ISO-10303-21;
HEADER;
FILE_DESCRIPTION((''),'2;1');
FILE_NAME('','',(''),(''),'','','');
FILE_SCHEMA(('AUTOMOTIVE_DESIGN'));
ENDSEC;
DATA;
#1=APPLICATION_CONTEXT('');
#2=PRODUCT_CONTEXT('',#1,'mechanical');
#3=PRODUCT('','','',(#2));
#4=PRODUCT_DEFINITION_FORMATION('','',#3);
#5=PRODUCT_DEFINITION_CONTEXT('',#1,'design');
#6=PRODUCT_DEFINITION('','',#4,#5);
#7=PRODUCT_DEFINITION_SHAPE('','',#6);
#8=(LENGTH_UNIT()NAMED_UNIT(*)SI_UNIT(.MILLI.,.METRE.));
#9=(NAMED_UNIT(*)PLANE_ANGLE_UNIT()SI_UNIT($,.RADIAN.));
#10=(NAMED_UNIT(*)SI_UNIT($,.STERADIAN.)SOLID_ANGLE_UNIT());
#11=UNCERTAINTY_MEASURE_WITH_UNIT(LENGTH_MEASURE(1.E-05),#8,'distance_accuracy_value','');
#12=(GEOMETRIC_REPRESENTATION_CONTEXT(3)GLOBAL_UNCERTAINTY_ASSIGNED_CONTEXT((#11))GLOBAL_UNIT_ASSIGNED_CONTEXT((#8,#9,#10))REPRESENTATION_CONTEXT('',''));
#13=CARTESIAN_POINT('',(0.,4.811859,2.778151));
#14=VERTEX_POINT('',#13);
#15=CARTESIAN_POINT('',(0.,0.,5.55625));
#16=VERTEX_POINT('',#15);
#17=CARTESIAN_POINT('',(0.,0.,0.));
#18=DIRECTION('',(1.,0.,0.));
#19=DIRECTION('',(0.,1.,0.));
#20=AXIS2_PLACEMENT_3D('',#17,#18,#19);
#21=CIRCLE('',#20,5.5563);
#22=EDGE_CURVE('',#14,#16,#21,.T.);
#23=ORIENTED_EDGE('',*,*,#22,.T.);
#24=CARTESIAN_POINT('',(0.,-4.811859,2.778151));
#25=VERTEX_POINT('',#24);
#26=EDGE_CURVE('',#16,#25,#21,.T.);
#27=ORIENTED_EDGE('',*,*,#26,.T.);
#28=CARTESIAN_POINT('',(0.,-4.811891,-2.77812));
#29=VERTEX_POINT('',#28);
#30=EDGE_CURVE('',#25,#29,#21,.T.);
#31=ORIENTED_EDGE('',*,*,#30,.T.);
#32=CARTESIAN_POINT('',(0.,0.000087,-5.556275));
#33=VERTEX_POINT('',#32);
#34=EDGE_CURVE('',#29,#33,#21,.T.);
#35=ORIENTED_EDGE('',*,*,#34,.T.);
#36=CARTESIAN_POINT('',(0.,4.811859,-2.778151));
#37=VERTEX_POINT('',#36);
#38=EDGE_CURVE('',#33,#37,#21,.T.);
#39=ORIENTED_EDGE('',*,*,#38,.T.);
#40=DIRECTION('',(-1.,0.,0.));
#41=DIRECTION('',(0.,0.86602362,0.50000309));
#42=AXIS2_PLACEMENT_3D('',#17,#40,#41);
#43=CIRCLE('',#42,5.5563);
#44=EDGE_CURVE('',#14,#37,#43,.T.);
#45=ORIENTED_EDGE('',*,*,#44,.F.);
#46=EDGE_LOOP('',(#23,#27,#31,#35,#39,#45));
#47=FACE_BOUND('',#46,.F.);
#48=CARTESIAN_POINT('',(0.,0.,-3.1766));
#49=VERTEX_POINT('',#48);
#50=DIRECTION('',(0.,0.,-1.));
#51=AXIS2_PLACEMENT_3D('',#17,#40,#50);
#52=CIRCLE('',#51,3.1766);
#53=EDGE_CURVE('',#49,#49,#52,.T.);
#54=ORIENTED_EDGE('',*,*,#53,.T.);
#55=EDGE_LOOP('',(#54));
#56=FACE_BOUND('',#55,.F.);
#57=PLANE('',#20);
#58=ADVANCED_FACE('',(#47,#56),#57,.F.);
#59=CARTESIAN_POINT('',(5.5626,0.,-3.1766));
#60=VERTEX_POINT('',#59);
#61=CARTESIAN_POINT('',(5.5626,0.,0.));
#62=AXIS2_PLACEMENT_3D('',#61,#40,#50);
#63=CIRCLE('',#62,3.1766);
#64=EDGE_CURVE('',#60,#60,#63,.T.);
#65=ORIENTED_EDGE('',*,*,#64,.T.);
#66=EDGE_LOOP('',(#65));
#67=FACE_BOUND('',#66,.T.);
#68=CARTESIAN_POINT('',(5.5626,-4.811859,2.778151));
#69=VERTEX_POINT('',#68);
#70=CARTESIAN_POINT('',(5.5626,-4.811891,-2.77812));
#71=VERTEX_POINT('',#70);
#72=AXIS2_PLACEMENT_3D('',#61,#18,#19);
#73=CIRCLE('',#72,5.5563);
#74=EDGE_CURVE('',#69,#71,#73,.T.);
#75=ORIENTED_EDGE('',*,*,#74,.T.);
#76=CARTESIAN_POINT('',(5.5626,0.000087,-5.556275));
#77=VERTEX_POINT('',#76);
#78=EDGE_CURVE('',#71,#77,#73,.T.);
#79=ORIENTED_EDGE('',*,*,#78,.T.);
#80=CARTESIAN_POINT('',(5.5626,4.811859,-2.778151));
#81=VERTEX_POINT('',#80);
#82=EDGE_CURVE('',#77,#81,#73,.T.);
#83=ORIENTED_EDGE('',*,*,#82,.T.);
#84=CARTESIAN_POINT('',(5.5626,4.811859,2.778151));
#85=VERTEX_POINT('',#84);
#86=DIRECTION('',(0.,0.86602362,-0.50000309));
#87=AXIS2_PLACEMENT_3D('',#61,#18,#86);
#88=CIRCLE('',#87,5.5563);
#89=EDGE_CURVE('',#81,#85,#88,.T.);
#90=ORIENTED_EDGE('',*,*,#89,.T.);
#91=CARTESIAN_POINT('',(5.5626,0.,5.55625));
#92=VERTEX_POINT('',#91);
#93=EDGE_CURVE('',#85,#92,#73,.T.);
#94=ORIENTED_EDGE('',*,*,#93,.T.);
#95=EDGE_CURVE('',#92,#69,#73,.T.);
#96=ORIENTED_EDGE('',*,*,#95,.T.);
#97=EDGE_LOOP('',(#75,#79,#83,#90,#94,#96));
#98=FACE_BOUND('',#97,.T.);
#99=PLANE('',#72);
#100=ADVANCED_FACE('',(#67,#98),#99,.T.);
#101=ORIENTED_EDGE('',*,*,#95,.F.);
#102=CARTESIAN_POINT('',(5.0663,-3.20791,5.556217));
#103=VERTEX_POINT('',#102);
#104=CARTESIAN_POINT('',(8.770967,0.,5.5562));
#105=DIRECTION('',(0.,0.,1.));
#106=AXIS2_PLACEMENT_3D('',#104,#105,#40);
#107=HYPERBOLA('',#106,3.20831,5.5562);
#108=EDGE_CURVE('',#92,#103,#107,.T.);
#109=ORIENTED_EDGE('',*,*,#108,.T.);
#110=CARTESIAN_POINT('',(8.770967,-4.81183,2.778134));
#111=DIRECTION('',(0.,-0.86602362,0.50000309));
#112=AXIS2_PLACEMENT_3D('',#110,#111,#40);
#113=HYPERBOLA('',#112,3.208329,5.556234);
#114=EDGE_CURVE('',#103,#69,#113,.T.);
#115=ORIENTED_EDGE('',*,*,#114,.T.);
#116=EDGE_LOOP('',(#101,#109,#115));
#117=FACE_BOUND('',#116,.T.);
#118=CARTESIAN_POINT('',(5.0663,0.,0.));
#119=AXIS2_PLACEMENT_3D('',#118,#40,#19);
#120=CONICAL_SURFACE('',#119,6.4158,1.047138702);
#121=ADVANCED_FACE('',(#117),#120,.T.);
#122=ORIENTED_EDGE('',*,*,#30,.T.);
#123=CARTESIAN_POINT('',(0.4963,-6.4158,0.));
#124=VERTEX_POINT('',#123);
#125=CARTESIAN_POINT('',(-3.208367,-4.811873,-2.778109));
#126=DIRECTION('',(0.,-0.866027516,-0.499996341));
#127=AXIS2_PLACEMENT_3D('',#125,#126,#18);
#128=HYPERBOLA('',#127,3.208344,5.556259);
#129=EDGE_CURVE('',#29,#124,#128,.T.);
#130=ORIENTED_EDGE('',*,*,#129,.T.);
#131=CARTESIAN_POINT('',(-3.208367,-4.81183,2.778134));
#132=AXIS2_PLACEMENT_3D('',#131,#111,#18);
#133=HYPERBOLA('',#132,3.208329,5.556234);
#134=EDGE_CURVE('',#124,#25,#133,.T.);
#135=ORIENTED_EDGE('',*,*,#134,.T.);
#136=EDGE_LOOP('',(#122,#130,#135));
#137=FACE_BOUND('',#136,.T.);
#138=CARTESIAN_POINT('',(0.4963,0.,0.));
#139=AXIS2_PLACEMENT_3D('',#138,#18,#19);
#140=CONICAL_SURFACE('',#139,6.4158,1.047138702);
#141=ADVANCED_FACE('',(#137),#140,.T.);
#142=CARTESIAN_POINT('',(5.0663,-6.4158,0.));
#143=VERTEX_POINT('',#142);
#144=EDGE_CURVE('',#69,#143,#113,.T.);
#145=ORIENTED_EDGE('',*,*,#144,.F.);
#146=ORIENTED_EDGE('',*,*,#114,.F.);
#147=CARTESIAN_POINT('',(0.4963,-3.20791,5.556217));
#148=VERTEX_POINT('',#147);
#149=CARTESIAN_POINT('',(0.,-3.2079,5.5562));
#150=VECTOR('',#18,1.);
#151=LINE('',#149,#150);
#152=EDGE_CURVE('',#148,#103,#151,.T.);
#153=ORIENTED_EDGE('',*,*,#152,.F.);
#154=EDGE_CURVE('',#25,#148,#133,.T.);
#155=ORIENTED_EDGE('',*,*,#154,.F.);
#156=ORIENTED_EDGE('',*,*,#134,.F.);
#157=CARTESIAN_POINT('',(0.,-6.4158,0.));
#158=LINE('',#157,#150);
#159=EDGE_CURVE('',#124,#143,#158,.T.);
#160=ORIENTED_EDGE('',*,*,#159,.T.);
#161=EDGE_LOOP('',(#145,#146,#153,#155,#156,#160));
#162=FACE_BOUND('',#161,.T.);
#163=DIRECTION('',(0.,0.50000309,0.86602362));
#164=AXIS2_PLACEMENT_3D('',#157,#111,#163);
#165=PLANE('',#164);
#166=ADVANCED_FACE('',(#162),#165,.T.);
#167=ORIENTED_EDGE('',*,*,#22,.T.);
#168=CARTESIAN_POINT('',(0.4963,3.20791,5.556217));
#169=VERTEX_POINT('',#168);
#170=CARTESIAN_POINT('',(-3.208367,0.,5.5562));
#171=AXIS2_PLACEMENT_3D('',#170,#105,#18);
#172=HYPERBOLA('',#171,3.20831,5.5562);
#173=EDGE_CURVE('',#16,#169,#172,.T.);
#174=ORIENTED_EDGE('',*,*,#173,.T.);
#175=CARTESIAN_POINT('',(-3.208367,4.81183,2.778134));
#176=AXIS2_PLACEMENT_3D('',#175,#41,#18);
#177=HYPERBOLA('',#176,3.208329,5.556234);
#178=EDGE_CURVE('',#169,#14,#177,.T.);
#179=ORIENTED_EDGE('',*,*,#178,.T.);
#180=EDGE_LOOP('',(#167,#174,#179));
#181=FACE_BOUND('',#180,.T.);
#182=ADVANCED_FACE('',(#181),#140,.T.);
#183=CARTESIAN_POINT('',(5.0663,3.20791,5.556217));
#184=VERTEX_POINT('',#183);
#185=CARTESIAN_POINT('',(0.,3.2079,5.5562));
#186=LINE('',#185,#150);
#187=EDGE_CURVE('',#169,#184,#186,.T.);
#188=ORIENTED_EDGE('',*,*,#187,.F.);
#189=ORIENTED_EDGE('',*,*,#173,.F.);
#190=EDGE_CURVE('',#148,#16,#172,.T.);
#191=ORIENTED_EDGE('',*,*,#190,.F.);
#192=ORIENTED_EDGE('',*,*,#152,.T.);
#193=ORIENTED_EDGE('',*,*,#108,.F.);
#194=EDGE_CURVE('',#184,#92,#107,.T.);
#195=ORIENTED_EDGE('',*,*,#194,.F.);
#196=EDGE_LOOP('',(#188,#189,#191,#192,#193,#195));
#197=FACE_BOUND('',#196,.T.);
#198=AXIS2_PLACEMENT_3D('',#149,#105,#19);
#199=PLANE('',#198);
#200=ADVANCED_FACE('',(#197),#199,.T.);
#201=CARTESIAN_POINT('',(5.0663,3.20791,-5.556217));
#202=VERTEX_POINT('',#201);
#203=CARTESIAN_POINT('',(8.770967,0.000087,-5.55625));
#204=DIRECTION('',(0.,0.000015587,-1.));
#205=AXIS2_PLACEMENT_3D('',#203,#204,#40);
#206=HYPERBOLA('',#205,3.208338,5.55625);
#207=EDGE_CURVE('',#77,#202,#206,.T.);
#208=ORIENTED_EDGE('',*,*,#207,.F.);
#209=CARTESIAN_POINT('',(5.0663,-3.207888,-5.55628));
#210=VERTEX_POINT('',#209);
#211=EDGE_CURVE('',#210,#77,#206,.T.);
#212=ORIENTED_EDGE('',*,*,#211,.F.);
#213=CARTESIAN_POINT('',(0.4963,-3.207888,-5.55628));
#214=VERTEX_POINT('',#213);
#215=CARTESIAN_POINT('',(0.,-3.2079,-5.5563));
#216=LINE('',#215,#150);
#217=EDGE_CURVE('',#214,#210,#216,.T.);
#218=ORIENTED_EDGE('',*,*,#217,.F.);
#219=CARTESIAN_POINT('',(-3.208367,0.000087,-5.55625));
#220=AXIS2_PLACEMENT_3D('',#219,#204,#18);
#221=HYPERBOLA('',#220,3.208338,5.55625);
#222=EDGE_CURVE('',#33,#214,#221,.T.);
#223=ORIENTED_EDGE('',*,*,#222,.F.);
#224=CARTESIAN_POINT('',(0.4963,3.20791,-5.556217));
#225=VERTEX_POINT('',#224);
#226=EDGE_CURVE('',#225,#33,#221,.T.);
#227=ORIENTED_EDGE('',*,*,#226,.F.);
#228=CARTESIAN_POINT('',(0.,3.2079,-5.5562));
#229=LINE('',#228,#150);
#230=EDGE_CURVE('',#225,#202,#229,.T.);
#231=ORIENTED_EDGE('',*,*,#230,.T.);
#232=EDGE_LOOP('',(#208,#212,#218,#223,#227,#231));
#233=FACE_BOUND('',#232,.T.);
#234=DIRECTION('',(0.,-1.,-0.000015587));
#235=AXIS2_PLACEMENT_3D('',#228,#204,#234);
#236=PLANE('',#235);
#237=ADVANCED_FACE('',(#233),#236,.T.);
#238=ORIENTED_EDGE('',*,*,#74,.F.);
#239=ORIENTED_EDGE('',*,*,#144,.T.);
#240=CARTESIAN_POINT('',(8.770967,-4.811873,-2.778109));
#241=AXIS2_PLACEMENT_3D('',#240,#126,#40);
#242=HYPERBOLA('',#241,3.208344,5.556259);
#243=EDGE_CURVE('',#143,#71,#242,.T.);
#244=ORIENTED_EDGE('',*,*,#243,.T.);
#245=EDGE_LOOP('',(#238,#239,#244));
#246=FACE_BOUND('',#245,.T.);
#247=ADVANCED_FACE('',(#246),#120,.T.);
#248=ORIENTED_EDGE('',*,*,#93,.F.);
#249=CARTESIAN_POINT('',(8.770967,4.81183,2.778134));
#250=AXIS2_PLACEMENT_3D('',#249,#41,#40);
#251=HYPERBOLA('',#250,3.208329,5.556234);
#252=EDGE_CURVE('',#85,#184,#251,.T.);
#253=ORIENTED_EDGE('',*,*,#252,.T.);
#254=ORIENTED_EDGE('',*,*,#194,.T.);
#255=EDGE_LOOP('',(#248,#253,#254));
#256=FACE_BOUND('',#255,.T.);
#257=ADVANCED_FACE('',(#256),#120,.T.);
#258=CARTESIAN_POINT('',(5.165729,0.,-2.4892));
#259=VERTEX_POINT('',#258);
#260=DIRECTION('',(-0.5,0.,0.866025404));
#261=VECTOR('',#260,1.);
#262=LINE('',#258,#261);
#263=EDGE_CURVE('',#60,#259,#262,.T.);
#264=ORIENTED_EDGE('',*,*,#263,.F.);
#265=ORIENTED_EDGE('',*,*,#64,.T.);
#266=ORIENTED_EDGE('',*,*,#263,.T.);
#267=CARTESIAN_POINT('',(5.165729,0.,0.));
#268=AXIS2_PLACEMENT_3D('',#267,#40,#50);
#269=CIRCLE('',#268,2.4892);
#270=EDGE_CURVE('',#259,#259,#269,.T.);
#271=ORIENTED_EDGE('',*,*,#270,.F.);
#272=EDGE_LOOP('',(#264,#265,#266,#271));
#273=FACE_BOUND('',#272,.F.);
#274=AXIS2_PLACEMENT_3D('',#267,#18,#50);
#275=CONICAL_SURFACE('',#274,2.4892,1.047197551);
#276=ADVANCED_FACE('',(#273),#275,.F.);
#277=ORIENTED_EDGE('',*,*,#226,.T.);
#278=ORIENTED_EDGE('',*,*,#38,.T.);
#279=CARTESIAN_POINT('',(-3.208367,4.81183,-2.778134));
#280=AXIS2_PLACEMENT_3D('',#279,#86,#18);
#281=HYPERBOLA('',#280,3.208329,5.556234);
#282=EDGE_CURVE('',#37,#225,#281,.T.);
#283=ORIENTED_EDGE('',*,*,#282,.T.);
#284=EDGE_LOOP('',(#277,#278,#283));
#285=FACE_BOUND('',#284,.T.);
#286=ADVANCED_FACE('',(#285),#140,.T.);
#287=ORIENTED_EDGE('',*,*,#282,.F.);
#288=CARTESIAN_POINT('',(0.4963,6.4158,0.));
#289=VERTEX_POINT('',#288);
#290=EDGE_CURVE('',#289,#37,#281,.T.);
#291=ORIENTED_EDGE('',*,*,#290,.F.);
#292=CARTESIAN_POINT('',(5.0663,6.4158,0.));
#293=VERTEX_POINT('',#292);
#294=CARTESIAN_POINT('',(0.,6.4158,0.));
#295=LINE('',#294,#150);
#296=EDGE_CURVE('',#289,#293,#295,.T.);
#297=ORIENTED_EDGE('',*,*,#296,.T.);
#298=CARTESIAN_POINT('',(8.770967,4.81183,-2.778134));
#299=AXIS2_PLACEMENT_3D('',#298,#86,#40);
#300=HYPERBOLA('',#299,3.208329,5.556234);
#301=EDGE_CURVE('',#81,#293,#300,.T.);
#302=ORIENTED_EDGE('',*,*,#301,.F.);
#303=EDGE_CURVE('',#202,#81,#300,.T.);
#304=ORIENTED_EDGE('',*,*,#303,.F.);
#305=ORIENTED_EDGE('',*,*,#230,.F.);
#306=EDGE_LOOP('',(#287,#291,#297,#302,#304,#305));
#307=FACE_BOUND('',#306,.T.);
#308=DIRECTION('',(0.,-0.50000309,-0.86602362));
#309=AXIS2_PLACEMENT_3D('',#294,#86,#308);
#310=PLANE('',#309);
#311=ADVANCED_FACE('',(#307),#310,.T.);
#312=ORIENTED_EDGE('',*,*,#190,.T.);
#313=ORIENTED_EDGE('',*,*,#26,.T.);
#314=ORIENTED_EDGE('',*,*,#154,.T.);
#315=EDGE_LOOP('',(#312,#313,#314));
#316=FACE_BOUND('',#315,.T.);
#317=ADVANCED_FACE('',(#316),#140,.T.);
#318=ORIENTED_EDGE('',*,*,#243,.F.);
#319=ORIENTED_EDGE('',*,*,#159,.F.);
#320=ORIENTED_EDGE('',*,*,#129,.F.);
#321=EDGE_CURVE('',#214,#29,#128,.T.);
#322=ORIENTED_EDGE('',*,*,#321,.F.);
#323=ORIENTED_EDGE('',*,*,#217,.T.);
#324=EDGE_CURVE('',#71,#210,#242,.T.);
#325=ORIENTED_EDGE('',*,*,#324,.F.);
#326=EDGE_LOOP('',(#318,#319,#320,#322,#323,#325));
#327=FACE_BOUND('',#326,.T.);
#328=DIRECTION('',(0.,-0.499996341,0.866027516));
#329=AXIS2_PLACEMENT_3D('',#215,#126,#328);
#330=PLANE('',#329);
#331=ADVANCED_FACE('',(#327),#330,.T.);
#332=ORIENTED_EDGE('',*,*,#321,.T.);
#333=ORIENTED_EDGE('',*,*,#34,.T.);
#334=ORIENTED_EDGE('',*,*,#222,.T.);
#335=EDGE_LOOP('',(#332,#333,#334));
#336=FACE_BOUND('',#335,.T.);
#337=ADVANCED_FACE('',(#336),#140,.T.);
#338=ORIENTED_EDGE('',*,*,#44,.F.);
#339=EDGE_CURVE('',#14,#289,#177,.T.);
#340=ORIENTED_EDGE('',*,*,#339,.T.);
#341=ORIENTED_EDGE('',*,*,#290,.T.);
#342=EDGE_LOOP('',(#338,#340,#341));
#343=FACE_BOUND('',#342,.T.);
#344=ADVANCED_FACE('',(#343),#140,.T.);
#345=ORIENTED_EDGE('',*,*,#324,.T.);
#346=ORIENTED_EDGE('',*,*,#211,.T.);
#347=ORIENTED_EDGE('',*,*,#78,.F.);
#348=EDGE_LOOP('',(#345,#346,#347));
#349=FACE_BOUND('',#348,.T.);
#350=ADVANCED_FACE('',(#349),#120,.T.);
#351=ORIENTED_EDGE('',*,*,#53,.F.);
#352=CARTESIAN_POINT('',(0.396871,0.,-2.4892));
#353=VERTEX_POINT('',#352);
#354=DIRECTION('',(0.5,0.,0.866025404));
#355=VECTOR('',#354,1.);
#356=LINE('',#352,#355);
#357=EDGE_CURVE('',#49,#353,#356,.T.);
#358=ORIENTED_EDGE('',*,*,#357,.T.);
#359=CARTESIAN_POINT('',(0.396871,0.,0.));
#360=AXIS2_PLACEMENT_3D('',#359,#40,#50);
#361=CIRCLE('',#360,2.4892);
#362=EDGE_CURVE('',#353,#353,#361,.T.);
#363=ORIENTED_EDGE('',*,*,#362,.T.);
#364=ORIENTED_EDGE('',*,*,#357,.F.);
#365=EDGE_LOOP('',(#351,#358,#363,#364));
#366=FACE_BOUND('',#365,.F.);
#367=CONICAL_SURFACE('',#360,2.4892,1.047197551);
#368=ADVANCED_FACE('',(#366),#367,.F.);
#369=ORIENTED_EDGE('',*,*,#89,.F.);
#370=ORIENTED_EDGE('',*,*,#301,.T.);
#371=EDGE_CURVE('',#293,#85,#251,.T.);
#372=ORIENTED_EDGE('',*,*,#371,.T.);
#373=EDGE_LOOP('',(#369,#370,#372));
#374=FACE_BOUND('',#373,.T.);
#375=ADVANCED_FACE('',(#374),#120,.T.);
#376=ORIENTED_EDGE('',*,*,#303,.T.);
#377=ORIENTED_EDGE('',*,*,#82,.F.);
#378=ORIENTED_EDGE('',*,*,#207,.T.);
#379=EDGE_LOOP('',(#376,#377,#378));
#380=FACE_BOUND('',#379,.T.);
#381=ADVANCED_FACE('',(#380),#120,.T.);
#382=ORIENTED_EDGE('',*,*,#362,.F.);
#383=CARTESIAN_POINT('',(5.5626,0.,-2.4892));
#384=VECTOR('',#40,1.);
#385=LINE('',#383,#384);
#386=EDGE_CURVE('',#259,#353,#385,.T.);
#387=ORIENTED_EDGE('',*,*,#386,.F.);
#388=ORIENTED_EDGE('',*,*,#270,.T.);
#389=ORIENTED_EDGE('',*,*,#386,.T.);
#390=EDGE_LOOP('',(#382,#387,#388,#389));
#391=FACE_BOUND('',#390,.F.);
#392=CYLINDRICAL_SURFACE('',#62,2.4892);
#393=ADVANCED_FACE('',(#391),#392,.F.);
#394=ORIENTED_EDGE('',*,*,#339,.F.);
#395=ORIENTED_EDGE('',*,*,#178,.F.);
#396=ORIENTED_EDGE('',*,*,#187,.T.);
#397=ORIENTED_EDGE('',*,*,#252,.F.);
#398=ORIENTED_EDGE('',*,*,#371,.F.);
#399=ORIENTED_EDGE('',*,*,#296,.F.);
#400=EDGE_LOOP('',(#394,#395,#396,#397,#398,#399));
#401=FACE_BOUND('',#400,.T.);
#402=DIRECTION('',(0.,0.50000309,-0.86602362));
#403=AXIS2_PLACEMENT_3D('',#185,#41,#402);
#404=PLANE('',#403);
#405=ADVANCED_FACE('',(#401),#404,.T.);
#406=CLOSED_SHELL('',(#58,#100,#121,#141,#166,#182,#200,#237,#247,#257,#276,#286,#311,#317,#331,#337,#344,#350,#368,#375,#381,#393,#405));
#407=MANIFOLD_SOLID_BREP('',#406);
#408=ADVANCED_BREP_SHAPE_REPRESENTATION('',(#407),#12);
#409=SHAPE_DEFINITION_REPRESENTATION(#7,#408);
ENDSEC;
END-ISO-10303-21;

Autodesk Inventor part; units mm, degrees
ref_plane "YZ Plane" through (0, 0, 0) normal (1, 0, 0) x (0, 1, 0)
ref_plane "XZ Plane" through (0, 0, 0) normal (0, 1, 0) x (-1, 0, 0)
sketch "Sketch1" plane through (0, 0, 0) normal (1, 0, 0) x (0, 1, 0)
  line L0 (-6.4158, 0) -> (-3.2079, 5.5562)
  line L1 (-3.2079, 5.5562) -> (3.2079, 5.5562)
  line L2 (3.2079, 5.5562) -> (6.4158, 0)
  line L3 (6.4158, 0) -> (3.2079, -5.5562)
  line L4 (3.2079, -5.5562) -> (-3.2079, -5.5563)
  line L5 (-3.2079, -5.5563) -> (-6.4158, 0)
  point P0 (0, 0)
  point P1 (0, 0)
  dimension "d0" = 12.8316
extrude "Body" add sketch "Sketch1" along normal blind 5.5626
sketch "Sketch2" plane through (0, 0, 0) normal (0, 0, 1) x (1, 0, 0)
  line L0 (0, 3.2079) -> (0, 6.4158) projected
  line L1 (0, 6.4158) -> (5.5626, 6.4158) projected
  line L2 (5.5626, 3.2079) -> (5.5626, 6.4158) projected
  line L3 (-1.1125, 0) -> (6.6751, 0) projected
  line L4 (0.4963, 6.4158) -> (0, 5.5563)
  line L5 (5.0663, 6.4158) -> (5.5626, 5.5563)
  dimension "d3" = 30
  dimension "d4" = 30
  dimension "d5" = 11.1125
  dimension "d6" = 11.1125
revolve "Chamfer1" cut sketch "Sketch2" angle 360 about axis through (-10, 0, 0) along (1, 0, 0)
sketch "Sketch3" plane through (5.5626, 0, 0) normal (1, 0, 0) x (0, 0, -1)
  arc A0 (-2.7781, -4.8119) -> (2.7781, -4.8119) centre (0, 0) ccw projected
hole "Thread" at (5.5626, 0, 0) direction (-1, 0, 0) diameter 4.9784 end through all thread size "1/4-20 UNC" class "2B" standard "ANSI Unified Screw Threads"
chamfer "Chamfer2" distance 0.6874 angle 30 1 edges at (5.5626, 0, 2.4892) measured on face at (5.5626, 4.5076, -0.1)
chamfer "Chamfer3" distance 0.6874 angle 30 1 edges at (0, 0, 2.4892) measured on face at (0, 4.5076, -0.1)
ref_plane "Work Plane1" through (-12.3002, 0, 0) normal (0, -0.8660254, -0.5) x (1, 0, 0)
equation "\"d0\" = 1.1547 * SW"
equation "\"d1\" = KOH"
equation "\"d3\" = ANG1"
equation "\"d4\" = ANG2"
equation "\"d5\" = SW0"
equation "\"d6\" = SW01"
equation "\"d8\" = -0.5 * GD1 + 0.5 * NND"
equation "\"d40\" = -0.5 * GD1 + 0.5 * NND"
equation "\"d10\" = -0.5 * GD1 + 0.5 * NND"
equation "\"d41\" = -0.5 * GD1 + 0.5 * NND"
equation "\"ANG1\" = 30deg"
equation "\"ANG2\" = 30deg"
equation "\"NND\" = 6.35"
equation "\"KOH\" = 5.5626"
equation "\"SW\" = 11.1125"
equation "\"SW0\" = SW"
equation "\"SW01\" = SW"
equation "\"THREADDIA\" = 6.35"
equation "\"TOA\" = 30deg"
equation "\"E0\" = 1.155 * SW"
equation "\"GD1\" = 4.975185"
properties part number "ANSI B18.2.2 - 1/4 - 20" material "Steel, Mild"
